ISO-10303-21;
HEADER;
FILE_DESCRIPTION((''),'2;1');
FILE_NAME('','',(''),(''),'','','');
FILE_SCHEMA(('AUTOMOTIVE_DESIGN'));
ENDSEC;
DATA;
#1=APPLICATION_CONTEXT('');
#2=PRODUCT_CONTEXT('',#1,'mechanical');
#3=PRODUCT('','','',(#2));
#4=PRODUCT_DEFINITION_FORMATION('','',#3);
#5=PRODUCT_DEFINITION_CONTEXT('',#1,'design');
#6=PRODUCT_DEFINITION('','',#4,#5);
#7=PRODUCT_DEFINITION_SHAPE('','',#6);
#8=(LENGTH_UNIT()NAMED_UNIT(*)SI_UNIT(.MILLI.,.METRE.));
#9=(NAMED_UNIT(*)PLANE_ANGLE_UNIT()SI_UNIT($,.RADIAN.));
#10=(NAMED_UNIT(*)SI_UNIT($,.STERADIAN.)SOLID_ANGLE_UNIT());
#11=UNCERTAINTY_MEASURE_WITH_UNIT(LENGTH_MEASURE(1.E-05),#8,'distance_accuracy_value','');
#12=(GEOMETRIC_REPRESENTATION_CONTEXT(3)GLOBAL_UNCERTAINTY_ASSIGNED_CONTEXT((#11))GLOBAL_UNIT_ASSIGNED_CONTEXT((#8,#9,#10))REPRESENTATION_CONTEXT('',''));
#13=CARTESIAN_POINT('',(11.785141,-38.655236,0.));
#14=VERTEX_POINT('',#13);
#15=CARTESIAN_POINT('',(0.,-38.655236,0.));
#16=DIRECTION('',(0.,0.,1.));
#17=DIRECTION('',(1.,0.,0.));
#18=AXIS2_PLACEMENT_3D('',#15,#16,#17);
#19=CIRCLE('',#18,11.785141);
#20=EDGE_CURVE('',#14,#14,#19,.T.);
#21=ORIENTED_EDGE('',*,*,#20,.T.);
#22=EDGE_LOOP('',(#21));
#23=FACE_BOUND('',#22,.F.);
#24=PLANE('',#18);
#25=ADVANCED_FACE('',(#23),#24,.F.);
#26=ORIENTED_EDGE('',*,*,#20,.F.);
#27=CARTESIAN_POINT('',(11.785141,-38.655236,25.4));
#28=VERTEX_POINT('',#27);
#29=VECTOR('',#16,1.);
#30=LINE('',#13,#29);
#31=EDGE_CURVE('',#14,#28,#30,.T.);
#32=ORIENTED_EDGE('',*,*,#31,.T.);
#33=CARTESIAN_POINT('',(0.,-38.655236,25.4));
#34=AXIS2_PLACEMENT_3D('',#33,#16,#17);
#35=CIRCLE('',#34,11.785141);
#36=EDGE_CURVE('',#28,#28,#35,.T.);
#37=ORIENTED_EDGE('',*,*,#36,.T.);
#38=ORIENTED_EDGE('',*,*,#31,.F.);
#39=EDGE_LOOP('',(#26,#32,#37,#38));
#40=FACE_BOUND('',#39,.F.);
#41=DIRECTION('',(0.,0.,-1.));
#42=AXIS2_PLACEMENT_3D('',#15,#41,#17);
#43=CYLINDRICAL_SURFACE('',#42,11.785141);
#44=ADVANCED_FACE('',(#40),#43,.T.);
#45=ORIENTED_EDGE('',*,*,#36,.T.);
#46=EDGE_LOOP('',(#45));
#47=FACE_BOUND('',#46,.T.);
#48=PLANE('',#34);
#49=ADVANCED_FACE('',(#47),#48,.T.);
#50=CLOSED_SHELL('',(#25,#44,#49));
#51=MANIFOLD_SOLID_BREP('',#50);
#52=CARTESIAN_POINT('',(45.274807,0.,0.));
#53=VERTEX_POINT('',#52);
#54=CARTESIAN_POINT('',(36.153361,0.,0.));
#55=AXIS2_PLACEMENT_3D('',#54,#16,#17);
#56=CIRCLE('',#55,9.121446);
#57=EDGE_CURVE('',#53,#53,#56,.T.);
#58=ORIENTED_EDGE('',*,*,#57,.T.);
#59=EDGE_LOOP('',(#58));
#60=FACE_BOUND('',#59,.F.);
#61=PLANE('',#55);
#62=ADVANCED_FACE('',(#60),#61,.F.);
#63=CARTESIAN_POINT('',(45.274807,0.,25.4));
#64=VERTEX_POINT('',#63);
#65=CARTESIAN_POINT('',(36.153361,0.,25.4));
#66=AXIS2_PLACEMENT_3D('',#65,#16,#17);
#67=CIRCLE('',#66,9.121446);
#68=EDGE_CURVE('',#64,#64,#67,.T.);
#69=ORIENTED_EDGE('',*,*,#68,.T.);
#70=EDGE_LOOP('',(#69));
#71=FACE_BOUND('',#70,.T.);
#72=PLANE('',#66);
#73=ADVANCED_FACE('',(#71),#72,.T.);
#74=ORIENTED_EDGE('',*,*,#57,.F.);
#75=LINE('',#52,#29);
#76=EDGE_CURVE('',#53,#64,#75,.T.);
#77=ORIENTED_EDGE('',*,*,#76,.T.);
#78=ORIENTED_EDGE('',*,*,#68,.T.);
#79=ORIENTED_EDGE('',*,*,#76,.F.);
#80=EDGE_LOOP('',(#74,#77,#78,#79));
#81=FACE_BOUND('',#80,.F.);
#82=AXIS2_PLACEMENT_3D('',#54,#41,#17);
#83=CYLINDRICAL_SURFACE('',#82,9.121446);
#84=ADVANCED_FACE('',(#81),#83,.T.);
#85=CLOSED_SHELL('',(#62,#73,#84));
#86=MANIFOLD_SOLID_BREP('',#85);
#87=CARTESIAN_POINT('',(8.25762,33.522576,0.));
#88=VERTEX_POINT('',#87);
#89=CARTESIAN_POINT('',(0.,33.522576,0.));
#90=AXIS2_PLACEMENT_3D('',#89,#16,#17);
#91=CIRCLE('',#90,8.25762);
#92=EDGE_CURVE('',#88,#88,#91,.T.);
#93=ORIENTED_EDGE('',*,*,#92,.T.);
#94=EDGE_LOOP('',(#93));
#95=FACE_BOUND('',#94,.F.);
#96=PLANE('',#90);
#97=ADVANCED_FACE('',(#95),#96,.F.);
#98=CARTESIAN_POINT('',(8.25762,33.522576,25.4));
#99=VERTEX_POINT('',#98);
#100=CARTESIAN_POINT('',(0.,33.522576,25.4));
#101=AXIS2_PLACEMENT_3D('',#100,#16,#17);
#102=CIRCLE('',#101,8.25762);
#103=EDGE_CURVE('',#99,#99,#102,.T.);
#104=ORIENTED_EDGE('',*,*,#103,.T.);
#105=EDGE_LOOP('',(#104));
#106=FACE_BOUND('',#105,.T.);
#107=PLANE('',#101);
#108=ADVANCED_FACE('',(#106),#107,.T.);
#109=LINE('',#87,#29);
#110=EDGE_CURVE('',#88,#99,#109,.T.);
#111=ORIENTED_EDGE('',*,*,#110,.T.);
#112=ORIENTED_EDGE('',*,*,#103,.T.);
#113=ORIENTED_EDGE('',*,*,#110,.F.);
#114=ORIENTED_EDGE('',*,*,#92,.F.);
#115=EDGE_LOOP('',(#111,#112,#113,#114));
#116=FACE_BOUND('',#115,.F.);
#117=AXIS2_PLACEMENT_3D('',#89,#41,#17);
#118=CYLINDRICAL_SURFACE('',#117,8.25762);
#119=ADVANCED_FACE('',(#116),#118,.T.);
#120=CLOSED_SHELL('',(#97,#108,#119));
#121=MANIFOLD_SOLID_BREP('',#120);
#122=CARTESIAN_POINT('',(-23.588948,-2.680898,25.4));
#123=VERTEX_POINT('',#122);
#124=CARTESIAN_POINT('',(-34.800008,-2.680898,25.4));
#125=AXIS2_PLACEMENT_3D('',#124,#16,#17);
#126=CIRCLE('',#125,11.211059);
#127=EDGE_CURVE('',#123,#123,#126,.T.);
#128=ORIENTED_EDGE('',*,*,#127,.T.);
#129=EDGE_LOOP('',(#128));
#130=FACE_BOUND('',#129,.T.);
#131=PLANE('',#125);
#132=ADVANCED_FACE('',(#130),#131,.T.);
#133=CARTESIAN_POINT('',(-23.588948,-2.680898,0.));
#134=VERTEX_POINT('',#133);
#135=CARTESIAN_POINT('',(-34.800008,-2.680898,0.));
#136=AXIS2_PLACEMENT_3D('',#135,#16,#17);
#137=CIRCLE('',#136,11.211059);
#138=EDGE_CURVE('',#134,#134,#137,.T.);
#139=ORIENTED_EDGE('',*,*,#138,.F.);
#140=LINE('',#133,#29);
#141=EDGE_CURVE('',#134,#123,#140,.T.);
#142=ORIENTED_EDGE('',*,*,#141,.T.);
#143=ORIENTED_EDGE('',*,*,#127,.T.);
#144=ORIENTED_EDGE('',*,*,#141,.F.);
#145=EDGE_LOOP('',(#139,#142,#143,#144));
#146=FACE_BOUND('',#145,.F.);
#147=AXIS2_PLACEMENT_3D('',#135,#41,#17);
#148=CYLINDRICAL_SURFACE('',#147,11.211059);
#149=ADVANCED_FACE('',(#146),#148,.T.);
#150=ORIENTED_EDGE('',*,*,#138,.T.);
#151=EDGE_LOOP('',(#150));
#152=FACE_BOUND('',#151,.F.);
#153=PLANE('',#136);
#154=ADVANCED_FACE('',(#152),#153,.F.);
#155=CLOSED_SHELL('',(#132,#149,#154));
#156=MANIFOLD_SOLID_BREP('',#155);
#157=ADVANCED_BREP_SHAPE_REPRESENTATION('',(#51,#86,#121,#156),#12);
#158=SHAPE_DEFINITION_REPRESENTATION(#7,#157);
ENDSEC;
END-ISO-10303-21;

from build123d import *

# Parameters (mm, degrees)
F2_R     = 9.1214460024
F3_DEPTH = 25.4
F4_R     = 11.2110594619
F5_DEPTH = 25.4
F6_R     = 11.7851409997
F7_DEPTH = 25.4
F6_R_2   = 8.2576202632


# Not quite as in the source:
# - the program builds the solid bodies; features that only make, move or delete a surface that nothing else refers to are left out


with BuildPart() as f3:
    # F2 (on Top) → F3 (new body)
    with BuildSketch(Plane.XY):
        with Locations((36.1533612013, 0)):
            Circle(F2_R)
    extrude(amount=F3_DEPTH)


with BuildPart() as f5:
    # F4 (on Top) → F5 (new body)
    with BuildSketch(Plane.XY):
        with Locations((-34.8000079393, -2.6808977127)):
            Circle(F4_R)
    extrude(amount=F5_DEPTH)


with BuildPart() as f7:
    # F6 (on Top) → F7 (new body)
    with BuildSketch(Plane.XY):
        with Locations((0, -38.6552363634)):
            Circle(F6_R)
    extrude(amount=F7_DEPTH)


with BuildPart() as f7b:
    # F6 (on Top) → F7, piece 2 (new body)
    with BuildSketch(Plane.XY):
        with Locations((0, 33.5225760937)):
            Circle(F6_R_2)
    extrude(amount=F7_DEPTH)


solid = Compound([f3.part, f5.part, f7.part, f7b.part])
